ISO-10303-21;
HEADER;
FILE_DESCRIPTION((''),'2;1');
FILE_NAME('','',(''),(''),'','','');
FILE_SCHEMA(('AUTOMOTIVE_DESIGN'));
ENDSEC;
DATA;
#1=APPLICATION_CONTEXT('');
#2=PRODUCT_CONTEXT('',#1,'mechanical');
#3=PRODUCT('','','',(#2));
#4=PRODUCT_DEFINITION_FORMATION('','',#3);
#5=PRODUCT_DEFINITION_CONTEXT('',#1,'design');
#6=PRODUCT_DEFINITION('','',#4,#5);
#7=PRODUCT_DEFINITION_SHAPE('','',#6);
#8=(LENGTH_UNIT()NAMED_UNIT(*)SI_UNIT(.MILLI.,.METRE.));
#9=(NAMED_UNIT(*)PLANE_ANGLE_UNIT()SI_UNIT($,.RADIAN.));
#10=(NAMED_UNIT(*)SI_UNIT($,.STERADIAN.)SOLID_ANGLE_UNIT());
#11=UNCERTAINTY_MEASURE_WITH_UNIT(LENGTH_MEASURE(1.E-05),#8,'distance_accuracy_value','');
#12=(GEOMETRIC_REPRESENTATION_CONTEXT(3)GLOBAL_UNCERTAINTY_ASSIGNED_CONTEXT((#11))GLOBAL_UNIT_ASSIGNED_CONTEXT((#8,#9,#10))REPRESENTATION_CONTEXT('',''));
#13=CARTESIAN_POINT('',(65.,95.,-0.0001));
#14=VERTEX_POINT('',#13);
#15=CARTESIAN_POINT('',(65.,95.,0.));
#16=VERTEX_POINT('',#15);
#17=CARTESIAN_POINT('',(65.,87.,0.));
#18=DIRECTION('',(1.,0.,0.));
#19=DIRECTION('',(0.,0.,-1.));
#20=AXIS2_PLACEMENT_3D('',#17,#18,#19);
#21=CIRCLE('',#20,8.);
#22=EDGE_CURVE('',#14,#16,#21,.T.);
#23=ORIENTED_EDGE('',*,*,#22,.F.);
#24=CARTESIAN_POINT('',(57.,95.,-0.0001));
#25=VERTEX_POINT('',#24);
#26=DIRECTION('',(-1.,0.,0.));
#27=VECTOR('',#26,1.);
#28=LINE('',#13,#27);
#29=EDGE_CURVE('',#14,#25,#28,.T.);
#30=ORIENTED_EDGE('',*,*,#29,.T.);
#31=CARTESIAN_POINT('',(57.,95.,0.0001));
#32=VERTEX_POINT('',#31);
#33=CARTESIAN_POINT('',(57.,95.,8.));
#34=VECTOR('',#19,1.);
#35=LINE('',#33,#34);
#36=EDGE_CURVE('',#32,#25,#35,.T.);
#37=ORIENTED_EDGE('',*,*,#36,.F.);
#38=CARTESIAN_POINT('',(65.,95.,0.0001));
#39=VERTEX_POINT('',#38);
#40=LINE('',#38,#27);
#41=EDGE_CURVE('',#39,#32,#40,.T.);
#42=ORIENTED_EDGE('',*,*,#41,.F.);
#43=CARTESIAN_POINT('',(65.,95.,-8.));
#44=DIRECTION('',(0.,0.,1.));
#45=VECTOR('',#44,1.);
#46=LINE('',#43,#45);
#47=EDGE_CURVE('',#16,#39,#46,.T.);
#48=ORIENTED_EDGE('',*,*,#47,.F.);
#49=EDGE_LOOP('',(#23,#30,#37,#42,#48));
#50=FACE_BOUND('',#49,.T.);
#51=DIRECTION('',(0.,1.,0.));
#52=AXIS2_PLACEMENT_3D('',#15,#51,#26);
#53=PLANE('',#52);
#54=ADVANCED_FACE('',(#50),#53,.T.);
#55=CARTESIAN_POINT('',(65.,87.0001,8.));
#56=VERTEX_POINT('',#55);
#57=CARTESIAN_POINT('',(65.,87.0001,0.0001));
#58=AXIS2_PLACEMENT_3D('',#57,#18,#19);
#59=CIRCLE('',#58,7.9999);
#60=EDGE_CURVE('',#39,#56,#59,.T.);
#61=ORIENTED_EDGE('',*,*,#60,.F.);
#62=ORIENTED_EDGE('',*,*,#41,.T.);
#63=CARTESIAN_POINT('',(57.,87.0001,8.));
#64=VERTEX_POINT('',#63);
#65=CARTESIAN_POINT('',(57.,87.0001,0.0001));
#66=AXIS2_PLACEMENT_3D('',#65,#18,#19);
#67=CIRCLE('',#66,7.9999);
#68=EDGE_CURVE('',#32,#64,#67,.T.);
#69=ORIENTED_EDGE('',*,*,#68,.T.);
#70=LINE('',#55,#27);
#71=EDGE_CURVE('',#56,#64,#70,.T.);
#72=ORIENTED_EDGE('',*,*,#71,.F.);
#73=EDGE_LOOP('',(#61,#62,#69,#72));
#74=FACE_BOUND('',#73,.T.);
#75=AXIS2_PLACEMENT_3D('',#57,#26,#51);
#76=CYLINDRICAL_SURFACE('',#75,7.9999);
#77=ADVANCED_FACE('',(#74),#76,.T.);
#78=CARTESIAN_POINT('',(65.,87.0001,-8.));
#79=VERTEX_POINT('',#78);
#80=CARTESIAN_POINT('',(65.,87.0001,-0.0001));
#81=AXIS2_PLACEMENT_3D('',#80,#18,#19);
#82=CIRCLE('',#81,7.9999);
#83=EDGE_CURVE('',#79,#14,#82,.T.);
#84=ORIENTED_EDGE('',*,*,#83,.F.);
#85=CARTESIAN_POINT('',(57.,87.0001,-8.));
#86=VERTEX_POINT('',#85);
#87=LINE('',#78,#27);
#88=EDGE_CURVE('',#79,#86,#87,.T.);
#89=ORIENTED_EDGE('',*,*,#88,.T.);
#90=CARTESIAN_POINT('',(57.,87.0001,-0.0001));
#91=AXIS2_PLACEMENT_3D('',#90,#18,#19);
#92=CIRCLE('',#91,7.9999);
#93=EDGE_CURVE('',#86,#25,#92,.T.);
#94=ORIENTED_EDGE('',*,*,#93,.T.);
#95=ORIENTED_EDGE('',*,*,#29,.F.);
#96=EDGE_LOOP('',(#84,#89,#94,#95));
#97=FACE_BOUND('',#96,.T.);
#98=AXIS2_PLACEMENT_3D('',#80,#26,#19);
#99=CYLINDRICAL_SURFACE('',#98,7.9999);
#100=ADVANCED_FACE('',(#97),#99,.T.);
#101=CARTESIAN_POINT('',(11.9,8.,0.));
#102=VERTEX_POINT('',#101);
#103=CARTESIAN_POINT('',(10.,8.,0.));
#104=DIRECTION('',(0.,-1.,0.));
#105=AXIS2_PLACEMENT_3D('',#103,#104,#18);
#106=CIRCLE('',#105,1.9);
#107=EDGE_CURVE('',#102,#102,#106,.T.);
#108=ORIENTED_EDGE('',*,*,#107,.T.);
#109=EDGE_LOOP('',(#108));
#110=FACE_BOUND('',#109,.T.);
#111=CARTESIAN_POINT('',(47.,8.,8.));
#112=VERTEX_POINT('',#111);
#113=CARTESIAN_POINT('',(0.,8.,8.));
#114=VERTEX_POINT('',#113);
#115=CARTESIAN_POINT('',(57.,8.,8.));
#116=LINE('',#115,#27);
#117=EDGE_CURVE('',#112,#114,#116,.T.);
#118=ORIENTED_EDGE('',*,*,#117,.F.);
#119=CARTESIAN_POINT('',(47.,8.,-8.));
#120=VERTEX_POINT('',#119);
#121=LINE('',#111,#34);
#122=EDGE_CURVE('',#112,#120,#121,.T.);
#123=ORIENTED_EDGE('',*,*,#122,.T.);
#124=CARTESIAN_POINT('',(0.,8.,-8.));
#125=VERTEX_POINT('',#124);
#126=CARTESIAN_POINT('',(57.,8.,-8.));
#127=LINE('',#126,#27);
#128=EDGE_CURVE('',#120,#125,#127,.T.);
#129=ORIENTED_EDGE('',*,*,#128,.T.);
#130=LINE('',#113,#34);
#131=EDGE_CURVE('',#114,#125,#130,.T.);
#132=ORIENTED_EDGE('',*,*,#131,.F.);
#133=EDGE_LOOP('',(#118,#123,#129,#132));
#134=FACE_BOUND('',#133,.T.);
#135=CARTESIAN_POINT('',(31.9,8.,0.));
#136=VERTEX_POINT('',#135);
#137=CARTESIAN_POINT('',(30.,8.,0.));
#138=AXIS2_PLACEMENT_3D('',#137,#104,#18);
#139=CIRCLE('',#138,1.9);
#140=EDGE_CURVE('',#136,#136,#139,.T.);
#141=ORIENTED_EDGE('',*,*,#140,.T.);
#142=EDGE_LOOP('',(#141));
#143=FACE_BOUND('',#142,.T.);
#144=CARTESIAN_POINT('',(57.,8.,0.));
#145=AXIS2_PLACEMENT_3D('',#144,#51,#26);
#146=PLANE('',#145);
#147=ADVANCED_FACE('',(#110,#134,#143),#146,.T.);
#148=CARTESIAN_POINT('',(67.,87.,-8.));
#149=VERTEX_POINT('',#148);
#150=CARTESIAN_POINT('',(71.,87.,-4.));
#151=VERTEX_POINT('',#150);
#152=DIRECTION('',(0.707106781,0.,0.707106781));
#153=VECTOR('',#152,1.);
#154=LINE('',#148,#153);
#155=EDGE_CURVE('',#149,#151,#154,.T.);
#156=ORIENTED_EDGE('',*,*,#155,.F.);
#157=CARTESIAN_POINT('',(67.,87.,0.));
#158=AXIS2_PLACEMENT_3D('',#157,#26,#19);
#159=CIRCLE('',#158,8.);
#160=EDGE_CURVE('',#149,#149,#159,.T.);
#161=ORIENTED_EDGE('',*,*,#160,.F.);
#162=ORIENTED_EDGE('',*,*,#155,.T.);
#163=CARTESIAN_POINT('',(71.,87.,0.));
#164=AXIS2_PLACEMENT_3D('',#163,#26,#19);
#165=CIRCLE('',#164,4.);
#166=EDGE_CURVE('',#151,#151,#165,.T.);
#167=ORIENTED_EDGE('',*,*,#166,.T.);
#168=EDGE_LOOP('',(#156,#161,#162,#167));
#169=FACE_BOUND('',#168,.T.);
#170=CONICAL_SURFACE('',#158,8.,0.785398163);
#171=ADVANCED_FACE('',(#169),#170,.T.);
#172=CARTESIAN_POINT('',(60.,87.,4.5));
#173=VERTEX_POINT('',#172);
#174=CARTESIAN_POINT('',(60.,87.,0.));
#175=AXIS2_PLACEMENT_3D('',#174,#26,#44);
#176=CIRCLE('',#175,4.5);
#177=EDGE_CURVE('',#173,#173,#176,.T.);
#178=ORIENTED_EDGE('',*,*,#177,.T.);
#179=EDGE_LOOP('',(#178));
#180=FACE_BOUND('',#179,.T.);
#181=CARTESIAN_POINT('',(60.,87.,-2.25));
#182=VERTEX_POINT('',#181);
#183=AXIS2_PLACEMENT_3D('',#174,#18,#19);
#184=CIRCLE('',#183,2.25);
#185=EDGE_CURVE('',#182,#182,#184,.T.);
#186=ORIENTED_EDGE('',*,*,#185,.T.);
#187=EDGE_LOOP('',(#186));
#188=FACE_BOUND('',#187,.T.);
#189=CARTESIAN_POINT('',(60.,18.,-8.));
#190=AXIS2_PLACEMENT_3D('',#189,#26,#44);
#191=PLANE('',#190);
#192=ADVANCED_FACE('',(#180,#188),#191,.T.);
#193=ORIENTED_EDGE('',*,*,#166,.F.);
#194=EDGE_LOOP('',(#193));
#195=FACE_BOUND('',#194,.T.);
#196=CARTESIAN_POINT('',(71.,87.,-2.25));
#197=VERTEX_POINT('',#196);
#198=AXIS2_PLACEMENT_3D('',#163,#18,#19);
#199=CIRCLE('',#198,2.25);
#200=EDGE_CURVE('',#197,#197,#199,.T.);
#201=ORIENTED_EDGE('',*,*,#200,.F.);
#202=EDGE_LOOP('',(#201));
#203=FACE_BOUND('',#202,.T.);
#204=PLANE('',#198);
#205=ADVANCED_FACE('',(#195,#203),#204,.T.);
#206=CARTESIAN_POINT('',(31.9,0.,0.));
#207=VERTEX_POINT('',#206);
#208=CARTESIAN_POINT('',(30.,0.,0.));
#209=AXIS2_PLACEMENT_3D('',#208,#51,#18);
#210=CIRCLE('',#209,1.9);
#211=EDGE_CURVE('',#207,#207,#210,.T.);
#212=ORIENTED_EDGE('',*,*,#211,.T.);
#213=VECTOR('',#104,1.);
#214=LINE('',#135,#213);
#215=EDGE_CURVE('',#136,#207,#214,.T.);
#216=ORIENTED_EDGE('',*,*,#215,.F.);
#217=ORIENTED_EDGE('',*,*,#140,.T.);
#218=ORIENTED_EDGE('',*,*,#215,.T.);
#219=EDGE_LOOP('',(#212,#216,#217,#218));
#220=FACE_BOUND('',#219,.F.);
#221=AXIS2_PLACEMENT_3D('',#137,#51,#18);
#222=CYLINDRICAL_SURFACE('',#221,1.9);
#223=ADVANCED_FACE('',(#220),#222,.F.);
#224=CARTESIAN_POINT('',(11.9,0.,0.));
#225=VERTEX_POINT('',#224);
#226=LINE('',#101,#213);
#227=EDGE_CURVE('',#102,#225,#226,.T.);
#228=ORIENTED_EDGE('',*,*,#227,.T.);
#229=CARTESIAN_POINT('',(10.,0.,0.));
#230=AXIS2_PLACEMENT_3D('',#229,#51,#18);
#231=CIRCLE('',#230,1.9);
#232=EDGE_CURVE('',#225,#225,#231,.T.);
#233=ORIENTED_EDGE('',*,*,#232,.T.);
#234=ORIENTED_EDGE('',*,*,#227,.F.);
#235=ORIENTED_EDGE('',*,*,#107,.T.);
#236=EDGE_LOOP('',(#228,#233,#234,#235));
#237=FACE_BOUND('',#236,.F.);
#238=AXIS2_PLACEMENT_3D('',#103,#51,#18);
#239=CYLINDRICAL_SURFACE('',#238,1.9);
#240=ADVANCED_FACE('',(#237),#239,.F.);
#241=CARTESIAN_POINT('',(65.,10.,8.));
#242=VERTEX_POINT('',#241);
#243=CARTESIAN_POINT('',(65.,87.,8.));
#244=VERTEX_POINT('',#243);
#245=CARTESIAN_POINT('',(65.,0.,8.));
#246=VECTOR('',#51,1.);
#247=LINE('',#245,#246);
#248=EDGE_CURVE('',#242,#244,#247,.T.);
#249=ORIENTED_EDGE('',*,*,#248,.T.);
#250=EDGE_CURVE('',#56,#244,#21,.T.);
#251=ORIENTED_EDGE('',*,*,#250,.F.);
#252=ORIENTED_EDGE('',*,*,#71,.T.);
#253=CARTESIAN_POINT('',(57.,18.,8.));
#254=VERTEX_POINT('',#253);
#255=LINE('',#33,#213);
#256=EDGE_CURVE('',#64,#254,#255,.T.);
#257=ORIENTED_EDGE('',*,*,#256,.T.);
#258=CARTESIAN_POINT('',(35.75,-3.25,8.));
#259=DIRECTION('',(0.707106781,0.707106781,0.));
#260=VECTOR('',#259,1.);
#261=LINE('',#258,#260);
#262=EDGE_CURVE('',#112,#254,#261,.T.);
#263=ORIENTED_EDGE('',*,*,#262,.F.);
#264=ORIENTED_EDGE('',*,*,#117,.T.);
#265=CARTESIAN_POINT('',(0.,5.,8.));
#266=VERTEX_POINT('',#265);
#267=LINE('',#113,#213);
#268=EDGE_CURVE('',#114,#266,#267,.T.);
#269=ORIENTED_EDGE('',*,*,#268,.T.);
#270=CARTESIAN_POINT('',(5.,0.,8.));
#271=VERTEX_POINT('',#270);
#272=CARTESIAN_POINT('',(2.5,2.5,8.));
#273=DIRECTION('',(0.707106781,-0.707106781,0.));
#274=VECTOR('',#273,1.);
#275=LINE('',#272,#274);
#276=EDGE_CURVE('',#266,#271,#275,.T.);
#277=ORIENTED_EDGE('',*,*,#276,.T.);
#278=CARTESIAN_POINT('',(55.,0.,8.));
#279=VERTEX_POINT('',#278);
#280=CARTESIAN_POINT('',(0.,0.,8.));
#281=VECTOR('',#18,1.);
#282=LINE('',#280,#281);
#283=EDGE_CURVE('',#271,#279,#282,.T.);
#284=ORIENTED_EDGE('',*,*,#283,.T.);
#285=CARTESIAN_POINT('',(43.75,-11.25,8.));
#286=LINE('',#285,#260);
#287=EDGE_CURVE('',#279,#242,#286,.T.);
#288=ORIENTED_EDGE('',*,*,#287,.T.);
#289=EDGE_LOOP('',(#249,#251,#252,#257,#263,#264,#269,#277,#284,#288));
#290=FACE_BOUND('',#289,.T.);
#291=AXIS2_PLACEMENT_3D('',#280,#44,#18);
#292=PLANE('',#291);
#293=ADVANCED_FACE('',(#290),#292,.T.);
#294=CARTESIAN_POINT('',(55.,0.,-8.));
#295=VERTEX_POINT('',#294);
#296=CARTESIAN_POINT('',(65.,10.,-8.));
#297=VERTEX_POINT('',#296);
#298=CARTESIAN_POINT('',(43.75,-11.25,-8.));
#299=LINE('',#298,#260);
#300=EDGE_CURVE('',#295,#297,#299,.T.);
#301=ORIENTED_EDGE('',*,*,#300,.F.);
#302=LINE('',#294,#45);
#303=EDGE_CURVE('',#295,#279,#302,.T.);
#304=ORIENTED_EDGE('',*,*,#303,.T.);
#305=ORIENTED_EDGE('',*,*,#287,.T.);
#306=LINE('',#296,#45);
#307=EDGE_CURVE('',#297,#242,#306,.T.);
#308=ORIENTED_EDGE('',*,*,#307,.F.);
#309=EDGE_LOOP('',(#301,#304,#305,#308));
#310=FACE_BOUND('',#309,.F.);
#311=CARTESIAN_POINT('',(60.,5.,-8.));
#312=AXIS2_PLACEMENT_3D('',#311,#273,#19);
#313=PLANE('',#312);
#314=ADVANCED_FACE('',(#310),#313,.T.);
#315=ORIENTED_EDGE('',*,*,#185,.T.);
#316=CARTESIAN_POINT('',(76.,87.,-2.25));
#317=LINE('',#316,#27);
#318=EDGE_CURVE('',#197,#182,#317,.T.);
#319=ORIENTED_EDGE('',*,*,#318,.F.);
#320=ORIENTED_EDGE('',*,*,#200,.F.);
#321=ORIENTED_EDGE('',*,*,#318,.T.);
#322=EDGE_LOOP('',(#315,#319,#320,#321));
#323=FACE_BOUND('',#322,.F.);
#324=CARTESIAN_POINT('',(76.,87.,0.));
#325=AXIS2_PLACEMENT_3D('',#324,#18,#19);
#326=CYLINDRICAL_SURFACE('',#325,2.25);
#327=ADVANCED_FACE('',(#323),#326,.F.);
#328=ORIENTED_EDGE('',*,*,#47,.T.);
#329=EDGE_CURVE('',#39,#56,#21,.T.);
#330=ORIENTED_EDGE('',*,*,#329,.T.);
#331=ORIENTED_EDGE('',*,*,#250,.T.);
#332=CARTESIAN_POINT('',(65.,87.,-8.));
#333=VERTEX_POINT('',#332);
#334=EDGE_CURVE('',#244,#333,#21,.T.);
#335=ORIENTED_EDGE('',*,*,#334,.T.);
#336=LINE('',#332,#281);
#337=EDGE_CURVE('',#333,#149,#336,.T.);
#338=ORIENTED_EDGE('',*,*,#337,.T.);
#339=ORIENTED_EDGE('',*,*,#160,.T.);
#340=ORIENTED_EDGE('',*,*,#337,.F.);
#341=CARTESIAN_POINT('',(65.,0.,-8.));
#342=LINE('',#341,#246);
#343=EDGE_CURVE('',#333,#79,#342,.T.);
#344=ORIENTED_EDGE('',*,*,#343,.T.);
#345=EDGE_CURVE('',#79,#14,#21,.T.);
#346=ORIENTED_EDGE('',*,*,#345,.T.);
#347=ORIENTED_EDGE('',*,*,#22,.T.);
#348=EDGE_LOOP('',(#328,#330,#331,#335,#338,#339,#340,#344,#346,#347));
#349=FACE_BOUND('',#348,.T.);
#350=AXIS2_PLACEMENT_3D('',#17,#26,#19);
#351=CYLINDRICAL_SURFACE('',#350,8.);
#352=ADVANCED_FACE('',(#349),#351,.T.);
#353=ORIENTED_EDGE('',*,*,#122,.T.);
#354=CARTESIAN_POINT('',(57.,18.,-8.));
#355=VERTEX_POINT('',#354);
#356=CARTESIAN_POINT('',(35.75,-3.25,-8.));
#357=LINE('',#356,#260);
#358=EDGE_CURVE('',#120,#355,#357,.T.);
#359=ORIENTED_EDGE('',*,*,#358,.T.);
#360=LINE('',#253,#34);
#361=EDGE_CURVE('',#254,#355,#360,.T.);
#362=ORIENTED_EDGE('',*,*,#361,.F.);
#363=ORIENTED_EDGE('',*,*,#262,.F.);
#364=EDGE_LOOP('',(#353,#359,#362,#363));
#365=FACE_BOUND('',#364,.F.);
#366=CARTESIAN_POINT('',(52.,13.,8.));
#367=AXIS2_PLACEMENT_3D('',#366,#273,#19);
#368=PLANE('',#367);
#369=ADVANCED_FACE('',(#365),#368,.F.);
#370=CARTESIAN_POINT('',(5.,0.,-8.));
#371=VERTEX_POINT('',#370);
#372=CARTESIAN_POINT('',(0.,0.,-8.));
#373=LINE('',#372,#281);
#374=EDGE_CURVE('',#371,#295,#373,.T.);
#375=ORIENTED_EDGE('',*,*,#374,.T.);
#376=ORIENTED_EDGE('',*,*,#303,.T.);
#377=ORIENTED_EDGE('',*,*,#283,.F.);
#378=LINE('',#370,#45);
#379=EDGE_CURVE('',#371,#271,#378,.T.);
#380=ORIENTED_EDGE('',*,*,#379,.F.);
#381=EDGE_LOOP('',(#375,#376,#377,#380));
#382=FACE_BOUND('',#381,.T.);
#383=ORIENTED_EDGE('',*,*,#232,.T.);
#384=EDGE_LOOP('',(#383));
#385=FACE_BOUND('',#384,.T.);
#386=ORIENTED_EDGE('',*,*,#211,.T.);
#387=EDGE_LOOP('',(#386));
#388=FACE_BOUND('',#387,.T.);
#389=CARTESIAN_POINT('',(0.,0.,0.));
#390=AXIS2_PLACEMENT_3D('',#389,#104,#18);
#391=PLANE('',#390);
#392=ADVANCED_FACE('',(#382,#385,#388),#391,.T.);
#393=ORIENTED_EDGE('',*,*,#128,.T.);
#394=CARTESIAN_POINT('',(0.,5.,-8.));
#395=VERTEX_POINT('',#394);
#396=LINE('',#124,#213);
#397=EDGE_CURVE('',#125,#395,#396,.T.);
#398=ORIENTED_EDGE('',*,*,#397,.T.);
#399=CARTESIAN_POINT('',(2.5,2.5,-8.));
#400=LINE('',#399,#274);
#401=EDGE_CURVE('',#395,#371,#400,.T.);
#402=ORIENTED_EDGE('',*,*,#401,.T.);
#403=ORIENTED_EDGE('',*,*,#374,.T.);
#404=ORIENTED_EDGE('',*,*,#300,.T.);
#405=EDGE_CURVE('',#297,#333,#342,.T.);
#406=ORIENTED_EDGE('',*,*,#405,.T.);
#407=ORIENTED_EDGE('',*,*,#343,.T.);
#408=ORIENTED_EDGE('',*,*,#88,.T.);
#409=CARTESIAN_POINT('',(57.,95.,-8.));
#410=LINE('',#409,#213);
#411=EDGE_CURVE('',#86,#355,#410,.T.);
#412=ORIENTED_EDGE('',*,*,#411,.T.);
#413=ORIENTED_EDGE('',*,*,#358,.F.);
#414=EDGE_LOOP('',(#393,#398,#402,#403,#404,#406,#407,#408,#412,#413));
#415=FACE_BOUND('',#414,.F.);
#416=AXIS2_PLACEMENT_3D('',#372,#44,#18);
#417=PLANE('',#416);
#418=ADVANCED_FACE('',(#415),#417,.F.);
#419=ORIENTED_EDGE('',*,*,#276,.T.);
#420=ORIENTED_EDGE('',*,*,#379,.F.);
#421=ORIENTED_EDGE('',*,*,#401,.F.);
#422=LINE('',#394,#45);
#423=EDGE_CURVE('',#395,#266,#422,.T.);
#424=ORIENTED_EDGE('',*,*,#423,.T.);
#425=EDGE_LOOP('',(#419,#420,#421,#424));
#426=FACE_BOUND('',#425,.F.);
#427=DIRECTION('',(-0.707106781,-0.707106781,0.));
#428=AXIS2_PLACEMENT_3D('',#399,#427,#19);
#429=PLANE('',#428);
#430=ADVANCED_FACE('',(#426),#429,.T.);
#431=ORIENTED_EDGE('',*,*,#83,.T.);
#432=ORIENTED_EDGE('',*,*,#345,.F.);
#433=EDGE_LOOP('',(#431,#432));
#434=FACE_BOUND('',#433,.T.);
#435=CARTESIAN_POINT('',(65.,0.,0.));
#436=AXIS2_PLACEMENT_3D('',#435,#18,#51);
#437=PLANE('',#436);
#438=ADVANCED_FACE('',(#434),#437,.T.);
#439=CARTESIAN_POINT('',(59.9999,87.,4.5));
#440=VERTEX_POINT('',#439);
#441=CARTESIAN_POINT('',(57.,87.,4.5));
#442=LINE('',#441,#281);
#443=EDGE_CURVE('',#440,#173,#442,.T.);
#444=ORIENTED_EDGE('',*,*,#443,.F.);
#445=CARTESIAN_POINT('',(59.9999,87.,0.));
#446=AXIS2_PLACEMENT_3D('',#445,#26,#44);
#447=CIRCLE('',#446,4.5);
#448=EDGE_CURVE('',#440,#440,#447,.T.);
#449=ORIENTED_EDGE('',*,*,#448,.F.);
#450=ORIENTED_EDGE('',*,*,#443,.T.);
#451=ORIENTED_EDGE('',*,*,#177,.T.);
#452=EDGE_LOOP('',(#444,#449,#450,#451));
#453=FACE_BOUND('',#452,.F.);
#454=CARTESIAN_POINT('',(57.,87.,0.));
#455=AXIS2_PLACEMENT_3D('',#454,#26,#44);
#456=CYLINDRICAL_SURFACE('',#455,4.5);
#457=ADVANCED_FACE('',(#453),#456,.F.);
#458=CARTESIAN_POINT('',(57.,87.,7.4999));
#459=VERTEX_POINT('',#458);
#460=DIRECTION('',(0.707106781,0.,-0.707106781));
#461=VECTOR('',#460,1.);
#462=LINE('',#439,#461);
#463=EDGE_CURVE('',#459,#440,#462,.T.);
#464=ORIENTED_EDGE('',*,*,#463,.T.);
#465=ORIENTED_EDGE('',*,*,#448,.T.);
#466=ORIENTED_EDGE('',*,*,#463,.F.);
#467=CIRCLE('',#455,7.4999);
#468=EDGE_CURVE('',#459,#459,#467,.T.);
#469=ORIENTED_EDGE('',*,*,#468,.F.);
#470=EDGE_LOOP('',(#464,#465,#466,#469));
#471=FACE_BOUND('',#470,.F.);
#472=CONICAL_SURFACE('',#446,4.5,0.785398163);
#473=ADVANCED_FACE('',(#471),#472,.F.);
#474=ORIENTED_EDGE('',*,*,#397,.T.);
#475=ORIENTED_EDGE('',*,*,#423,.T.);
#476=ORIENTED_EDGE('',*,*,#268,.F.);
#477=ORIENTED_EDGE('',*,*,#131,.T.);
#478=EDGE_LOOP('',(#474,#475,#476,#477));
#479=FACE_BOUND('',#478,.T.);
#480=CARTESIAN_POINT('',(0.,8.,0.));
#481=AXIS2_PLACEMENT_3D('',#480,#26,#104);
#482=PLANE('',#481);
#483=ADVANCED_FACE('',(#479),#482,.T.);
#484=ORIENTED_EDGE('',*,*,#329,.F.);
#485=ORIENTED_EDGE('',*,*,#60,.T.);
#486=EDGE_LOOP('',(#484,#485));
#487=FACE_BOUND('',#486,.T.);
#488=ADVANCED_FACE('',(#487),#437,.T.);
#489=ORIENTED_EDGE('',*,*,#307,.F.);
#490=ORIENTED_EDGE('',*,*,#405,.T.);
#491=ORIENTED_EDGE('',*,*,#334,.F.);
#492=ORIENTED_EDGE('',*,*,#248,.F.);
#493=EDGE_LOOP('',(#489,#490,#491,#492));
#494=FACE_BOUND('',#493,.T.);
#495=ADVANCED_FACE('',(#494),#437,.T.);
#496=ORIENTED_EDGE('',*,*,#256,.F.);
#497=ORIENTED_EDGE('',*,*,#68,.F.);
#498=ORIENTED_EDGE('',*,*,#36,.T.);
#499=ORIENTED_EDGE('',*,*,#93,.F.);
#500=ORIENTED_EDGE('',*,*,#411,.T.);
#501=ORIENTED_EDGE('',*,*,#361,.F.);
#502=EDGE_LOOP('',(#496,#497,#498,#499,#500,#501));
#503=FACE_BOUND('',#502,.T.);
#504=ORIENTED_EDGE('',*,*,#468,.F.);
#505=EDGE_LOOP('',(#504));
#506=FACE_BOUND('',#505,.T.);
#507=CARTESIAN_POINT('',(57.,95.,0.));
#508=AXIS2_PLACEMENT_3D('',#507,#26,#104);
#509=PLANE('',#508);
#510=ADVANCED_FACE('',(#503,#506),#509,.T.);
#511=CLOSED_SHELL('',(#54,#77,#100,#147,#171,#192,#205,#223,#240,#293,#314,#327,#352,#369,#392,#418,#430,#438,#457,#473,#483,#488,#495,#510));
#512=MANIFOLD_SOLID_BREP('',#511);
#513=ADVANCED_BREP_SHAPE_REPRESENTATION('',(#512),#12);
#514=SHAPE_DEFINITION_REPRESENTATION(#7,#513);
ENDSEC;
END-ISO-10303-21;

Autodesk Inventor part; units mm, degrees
ref_plane "YZ Plane" through (0, 0, 0) normal (1, 0, 0) x (0, 1, 0)
ref_plane "XZ Plane" through (0, 0, 0) normal (0, 1, 0) x (-1, 0, 0)
ref_plane "XY Plane" through (0, 0, 0) normal (0, 0, 1) x (1, 0, 0)
sketch "Sketch3" plane through (0, 0, 0) normal (0, 0, 1) x (1, 0, 0)
  line L0 (0, 0) -> (65, 0)
  line L1 (65, 0) -> (65, 95)
  line L2 (65, 95) -> (57, 95)
  line L3 (57, 95) -> (57, 8)
  line L4 (57, 8) -> (0, 8)
  line L5 (0, 8) -> (0, 0)
  dimension "d17" = 8
  dimension "d18" = 57
  dimension "d19" = 87
  dimension "d20" = 8
extrude "Extrusion3" add sketch "Sketch3" against normal mid plane 16
sketch "Sketch5" plane through (0, 8, -8) normal (0, 1, 0) x (1, 0, 0)
  line L0 (-13, -8) -> (78, -8) projected
  circle A0 centre (10, -8) radius 1.9
  circle A1 centre (30, -8) radius 1.9
  line L1 (0, 0) -> (0, -16) projected
  point P0 (0, -8)
  dimension "d23" = 3.8
  dimension "d24" = 3.8
  dimension "d25" = 10
  dimension "d26" = 20
extrude "Extrusion4" cut sketch "Sketch5" against normal through all
chamfer "Chamfer2" distance 5 angle 45 1 edges at (0, 0, 0)
chamfer "Chamfer3" distance 10 angle 45 1 edges at (57, 8, 0)
chamfer "Chamfer4" distance 10 angle 45 1 edges at (65, 0, 0)
sketch "Sketch6" plane through (65, 95, 8) normal (1, 0, 0) x (0, 0, -1)
  line L0 (16, -77) -> (16, 0) projected
  line L1 (0, -85) -> (0, 0) projected
  circle A0 centre (8, -8) radius 8
  line L2 (16, 0) -> (0, 0) projected
  point P0 (8, -95)
  dimension "d39" = 16
extrude "Extrusion5" add sketch "Sketch6" along normal blind 7 contours A0
fillet "Fillet1" radius 8 2 edges at (61, 95, -8) (61, 95, 8)
sketch "Sketch7" plane through (57, 18, -8) normal (-1, 0, 0) x (0, 0, 1)
  point P0 (8, -18)
sketch "Sketch8" plane through (72, 87, 0) normal (1, 0, 0) x (0, 0, -1)
  circle A0 centre (0, 0) radius 8 projected
  circle A1 centre (0, 0) radius 2.75
  point P0 (0, -87)
  dimension "d43" = 5.5
extrude "Extrusion6" add sketch "Sketch8" along normal blind 4 contours A1
sketch "Sketch9" plane through (76, 87, 0) normal (1, 0, 0) x (0, 0, -1)
  circle A0 centre (0, 0) radius 2.75 construction
  circle A1 centre (0, 0) radius 2.25
  point P0 (0, -87)
  dimension "d46" = 4.5
extrude "Extrusion7" cut sketch "Sketch9" against normal through all
sketch "Sketch10" plane through (57, 18, -8) normal (-1, 0, 0) x (0, 0, 1)
  circle A0 centre (8, 69) radius 2.25 projected
  circle A1 centre (8, 69) radius 4.5
  point P0 (8, -18)
  dimension "d49" = 9
extrude "Extrusion8" cut sketch "Sketch10" against normal blind 3
chamfer "Chamfer5" distance 3 angle 45 1 edges at (57, 87, -4.5)
chamfer "Chamfer6" distance 3 angle 45 1 edges at (72, 87, 2.75)
sketch "Sketch11" plane through (76, 87, 0) normal (1, 0, 0) x (0, 0, -1)
  circle A0 centre (0, 0) radius 2.25 projected
  circle A1 centre (0, 0) radius 10.166
  point P0 (0, -87)
extrude "Extrusion9" cut sketch "Sketch11" against normal blind 5
chamfer "Chamfer7" distance 4 angle 45 1 edges at (71, 87, 8)
equation "\"d20\" = d17"
properties part number "LinearActuatorToBottomPlateAdapter"
